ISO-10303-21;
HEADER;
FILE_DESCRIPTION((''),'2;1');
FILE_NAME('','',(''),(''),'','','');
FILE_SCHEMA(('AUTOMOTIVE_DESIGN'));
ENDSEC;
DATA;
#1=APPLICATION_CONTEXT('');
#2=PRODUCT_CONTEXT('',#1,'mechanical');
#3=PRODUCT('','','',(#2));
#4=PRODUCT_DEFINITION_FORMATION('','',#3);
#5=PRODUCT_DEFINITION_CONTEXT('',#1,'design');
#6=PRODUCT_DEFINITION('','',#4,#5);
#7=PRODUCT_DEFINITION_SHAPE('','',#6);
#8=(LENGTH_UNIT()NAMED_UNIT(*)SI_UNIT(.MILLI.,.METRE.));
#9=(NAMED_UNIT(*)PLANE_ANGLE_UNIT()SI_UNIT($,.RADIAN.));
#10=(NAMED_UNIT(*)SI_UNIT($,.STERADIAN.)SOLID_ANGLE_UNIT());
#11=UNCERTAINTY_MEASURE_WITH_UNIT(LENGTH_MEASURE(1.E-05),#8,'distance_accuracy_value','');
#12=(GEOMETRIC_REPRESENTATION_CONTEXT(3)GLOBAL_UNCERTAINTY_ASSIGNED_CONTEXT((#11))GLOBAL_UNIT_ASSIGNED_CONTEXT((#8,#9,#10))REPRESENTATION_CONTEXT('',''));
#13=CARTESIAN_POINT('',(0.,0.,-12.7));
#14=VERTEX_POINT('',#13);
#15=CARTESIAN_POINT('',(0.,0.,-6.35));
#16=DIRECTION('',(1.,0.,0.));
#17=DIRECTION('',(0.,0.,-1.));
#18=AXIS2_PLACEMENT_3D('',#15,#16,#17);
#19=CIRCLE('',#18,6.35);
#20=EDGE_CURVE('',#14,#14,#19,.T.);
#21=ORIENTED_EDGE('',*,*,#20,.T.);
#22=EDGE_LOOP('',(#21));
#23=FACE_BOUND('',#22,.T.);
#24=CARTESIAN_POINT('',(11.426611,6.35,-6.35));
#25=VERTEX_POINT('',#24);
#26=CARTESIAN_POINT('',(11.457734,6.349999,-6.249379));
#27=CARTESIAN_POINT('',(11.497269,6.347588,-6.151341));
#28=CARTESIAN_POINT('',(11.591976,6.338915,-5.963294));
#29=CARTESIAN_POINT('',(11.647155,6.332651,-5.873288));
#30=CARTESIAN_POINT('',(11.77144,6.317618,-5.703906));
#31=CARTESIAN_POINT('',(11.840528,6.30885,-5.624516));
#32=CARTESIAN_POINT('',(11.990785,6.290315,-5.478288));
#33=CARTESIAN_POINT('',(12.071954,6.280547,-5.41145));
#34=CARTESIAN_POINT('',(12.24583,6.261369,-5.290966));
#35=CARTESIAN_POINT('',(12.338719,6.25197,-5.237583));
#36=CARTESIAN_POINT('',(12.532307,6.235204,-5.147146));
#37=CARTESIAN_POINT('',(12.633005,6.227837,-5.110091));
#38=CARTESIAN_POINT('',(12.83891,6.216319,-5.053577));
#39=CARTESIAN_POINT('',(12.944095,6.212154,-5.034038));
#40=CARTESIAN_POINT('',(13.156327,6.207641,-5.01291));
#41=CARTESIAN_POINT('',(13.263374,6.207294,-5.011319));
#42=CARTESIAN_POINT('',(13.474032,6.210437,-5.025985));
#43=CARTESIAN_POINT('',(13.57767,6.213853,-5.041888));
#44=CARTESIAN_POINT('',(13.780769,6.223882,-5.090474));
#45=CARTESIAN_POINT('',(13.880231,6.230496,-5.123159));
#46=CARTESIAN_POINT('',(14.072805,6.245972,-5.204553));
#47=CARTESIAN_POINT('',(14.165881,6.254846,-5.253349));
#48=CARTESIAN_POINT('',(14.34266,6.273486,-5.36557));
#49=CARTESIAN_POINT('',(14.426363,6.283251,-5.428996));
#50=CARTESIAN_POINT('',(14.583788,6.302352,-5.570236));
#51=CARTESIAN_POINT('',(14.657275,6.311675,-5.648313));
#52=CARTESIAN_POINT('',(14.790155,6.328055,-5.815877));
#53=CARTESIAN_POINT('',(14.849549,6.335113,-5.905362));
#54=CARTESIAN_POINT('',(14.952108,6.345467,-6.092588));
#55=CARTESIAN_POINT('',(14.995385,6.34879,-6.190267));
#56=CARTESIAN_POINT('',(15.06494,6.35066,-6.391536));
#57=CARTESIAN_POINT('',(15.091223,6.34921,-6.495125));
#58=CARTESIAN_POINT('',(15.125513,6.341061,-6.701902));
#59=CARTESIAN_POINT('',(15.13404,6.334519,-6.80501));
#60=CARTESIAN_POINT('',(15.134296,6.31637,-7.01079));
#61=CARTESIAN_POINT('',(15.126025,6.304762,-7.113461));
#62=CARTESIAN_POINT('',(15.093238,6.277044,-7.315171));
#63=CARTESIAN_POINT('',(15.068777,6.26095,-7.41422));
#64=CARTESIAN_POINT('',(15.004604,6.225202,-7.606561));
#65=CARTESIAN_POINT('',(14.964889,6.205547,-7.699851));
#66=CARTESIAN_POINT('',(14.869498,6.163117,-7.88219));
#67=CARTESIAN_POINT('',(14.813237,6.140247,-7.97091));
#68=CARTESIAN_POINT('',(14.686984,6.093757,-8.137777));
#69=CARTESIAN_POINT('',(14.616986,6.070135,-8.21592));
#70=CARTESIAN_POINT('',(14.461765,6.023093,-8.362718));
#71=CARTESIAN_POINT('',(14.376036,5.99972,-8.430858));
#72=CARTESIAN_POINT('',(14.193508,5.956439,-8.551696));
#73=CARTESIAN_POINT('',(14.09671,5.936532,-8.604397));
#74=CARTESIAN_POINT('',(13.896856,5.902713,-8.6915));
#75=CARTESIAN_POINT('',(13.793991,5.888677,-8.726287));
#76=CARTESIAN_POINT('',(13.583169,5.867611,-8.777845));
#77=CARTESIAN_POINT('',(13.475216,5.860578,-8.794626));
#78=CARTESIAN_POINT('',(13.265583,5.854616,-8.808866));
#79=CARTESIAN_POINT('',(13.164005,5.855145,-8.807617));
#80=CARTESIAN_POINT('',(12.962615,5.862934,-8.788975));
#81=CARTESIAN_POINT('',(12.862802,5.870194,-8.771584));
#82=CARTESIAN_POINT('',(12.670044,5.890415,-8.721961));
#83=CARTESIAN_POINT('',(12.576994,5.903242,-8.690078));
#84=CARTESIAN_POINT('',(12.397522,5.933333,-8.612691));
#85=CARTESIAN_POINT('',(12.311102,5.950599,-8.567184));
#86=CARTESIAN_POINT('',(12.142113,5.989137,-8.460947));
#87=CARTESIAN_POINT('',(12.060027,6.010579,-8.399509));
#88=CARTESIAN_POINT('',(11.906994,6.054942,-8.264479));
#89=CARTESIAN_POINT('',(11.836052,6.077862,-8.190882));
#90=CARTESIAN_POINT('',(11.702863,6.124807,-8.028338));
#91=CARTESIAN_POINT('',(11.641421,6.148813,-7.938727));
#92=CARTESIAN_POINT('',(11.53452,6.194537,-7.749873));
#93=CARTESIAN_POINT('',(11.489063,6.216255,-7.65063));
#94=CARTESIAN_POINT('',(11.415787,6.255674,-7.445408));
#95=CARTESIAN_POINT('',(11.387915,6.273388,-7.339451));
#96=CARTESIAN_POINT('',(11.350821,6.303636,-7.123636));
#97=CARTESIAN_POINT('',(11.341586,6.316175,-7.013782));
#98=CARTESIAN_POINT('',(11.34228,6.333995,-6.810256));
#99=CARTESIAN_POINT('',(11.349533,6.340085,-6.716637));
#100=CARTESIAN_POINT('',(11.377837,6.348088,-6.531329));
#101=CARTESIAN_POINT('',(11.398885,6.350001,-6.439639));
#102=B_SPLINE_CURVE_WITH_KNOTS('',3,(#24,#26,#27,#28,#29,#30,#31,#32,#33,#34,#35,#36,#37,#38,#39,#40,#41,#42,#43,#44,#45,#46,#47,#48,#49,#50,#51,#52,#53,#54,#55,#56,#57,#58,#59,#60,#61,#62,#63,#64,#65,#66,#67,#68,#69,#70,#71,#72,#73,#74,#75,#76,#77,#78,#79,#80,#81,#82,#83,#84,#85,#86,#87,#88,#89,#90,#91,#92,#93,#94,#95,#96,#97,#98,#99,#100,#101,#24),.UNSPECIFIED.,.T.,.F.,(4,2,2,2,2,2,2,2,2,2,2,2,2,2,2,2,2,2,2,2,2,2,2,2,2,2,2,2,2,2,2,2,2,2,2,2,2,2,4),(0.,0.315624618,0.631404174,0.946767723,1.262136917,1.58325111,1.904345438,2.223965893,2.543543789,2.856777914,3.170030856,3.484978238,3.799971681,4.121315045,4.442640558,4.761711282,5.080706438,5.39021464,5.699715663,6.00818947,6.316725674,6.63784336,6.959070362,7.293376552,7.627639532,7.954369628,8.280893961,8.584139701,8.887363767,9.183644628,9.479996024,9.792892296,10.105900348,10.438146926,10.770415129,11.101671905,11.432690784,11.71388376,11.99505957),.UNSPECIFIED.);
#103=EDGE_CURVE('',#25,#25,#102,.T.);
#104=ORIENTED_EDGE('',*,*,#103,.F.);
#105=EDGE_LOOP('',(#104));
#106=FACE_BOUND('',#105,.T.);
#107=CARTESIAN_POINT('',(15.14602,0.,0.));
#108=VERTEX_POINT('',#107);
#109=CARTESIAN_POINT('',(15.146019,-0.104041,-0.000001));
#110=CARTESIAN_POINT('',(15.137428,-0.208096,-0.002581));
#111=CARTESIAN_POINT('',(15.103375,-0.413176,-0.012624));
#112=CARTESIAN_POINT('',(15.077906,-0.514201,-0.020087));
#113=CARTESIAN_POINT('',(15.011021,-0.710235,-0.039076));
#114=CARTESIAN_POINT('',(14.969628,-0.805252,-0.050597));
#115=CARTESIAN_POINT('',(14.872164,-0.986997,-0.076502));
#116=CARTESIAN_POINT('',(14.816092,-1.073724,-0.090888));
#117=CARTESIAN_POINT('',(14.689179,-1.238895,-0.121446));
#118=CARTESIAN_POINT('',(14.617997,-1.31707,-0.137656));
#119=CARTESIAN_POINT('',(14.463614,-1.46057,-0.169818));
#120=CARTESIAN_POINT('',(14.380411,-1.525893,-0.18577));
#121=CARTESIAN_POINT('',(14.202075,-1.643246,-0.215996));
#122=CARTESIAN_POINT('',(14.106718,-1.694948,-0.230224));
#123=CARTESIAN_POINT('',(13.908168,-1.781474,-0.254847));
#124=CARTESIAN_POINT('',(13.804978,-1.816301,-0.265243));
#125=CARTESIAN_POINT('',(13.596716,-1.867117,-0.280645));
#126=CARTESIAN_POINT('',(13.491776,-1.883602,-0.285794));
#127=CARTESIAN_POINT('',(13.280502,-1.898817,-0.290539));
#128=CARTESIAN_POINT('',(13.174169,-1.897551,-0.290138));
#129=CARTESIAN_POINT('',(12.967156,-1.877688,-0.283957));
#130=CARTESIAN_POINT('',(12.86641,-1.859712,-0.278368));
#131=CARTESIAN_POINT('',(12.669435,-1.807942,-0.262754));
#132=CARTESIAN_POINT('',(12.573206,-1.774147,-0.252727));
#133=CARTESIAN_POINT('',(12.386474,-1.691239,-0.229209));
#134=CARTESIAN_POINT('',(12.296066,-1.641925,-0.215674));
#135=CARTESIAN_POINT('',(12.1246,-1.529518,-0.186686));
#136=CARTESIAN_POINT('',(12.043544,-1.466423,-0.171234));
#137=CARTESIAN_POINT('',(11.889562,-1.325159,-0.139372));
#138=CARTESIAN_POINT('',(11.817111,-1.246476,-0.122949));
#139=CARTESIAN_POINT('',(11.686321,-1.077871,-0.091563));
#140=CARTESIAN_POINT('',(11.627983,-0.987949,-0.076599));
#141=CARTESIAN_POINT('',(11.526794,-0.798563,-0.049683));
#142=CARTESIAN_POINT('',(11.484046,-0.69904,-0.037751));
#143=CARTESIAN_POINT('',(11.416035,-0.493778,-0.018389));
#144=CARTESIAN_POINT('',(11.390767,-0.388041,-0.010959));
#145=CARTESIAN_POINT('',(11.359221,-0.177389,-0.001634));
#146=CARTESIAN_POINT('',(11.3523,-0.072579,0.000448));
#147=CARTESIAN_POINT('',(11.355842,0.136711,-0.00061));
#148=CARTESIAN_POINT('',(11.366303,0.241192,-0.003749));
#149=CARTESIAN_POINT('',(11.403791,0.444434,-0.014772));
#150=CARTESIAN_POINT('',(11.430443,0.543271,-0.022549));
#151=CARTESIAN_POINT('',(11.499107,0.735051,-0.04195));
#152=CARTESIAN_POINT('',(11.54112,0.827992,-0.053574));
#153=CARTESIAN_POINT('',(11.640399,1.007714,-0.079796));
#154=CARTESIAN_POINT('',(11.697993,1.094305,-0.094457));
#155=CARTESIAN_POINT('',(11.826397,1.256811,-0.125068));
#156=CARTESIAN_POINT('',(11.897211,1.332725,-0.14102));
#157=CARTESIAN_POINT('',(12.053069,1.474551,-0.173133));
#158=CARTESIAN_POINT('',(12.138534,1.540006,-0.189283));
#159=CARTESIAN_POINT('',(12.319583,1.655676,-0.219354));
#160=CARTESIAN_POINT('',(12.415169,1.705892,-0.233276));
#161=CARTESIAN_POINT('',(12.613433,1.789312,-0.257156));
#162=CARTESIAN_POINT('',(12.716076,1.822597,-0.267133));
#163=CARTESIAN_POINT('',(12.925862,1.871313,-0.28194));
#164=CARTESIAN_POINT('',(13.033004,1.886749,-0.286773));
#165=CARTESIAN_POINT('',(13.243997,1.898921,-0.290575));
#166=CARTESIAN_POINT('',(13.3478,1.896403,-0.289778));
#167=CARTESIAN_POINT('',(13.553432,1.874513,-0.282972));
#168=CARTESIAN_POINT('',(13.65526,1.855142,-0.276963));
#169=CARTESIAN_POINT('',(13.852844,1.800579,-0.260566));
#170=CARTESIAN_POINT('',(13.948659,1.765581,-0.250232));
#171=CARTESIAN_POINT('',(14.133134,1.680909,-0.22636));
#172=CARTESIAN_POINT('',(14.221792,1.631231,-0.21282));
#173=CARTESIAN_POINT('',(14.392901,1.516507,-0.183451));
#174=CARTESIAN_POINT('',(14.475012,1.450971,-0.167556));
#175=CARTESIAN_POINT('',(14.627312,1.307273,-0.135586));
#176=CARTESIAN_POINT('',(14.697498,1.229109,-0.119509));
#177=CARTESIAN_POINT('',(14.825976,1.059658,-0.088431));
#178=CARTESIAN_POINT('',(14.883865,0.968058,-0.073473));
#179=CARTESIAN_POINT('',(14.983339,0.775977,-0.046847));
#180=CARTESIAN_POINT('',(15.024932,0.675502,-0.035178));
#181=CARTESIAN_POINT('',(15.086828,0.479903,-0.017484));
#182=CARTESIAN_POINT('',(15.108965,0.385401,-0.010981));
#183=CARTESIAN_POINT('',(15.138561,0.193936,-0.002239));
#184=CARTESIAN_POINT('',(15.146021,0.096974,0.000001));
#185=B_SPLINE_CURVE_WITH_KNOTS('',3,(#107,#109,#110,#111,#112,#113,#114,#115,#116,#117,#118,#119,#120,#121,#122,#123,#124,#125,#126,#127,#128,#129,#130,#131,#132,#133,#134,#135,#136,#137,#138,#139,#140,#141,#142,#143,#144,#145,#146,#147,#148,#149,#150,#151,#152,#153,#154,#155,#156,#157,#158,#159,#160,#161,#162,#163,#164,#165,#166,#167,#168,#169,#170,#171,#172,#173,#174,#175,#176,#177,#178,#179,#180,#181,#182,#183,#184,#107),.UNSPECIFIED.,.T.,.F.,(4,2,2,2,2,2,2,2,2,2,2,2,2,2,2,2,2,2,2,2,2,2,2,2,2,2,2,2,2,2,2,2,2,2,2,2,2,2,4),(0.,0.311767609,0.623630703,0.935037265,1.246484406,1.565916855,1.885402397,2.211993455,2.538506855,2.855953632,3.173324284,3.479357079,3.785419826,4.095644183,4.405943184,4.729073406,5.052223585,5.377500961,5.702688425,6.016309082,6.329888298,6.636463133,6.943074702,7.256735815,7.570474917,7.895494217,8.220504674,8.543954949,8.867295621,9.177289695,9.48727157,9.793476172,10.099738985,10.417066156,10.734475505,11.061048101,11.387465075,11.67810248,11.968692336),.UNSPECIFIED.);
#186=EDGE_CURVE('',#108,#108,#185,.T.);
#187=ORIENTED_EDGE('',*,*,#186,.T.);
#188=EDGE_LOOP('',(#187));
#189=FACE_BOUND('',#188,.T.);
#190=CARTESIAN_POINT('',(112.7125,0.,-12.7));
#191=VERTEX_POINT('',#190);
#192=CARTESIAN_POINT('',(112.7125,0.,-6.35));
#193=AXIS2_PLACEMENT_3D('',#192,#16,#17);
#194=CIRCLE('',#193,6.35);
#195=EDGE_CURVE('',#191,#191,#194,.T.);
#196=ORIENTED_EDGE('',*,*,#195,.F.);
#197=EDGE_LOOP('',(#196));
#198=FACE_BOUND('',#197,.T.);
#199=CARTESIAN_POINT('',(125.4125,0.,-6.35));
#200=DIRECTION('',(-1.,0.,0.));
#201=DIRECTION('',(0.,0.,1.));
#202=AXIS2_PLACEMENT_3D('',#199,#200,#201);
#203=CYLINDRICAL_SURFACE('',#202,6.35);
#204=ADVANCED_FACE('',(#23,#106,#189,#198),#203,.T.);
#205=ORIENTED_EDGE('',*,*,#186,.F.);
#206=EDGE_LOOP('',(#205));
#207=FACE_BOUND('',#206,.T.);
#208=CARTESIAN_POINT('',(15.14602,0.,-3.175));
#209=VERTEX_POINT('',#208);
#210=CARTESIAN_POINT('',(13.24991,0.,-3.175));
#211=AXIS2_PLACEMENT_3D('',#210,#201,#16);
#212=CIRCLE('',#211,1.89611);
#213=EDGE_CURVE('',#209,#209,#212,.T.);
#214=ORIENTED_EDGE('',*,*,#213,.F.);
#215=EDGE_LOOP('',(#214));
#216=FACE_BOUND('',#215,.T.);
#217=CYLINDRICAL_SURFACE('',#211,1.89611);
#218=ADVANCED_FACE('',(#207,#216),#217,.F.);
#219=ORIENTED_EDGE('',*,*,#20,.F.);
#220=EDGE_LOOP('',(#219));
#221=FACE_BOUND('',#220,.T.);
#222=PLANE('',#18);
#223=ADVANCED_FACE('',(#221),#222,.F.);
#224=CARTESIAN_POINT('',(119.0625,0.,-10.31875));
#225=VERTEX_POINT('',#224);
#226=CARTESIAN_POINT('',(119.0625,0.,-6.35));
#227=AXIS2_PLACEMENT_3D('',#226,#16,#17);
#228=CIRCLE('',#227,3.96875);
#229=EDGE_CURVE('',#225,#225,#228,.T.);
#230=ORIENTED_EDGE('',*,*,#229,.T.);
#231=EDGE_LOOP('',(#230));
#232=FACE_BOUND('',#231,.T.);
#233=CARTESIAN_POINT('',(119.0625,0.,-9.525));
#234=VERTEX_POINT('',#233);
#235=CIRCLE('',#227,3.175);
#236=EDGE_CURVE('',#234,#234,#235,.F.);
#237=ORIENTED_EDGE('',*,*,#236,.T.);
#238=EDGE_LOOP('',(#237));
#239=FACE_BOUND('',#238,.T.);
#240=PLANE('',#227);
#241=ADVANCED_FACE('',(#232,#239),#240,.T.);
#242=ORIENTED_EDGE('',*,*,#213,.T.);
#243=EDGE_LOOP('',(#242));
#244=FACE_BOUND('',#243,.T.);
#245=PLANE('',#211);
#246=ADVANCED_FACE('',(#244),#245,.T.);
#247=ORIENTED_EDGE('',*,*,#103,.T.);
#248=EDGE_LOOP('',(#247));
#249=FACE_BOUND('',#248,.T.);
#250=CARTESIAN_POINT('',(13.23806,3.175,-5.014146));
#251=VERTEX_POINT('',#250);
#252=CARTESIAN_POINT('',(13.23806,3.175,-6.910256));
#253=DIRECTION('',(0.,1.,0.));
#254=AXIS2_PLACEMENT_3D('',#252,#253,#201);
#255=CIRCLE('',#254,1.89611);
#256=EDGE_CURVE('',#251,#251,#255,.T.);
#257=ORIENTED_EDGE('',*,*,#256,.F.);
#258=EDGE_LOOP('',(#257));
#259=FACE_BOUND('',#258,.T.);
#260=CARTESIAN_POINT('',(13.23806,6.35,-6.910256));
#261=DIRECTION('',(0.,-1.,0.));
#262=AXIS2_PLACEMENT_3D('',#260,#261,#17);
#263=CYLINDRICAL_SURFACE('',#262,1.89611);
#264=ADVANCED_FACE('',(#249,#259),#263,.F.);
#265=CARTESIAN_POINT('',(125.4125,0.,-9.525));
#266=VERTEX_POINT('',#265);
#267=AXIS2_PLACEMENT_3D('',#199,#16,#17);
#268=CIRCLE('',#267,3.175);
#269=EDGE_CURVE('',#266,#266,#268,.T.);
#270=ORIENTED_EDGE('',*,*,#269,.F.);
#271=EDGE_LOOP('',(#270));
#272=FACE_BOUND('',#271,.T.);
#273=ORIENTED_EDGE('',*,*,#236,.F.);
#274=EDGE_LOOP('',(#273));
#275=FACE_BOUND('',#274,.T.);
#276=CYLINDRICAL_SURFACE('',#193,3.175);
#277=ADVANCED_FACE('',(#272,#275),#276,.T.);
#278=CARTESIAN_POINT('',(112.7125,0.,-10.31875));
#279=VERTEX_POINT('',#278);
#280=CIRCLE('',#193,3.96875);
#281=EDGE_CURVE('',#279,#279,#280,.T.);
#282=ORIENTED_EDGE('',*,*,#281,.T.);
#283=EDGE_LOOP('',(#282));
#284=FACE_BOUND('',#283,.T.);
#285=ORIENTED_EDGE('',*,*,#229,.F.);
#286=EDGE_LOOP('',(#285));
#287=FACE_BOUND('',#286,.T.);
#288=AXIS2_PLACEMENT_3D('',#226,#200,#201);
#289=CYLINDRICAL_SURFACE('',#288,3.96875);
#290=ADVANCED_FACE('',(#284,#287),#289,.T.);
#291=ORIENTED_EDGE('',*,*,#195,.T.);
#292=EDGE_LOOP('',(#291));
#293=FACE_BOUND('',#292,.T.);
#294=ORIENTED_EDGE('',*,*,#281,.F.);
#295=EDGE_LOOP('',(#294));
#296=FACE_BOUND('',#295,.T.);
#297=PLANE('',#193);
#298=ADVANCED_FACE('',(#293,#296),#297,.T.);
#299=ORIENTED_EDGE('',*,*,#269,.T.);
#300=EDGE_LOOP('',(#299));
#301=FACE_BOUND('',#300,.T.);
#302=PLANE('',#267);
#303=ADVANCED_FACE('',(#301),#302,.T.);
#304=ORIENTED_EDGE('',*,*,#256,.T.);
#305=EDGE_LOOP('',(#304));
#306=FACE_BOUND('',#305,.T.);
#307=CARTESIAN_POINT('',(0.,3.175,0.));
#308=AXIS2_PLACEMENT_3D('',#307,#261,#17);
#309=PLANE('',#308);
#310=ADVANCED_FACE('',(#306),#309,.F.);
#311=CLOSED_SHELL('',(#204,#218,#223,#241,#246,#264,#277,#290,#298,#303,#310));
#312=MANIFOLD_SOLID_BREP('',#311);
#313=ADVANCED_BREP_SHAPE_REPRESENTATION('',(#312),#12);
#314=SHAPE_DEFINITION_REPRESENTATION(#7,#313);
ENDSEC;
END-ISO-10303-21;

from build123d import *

# Parameters (mm, degrees)
SKETCH1_R              = 6.35
BOSS_EXTRUDE1_DEPTH    = 125.4125
SKETCH2_R              = 1.89611
CUT_EXTRUDE1_DEPTH     = 3.175
CUT_EXTRUDE2_START     = 3.175
CUT_EXTRUDE2_OUTLINE_R = 1.89611
CUT_EXTRUDE2_DEPTH     = 3.1750001
SKETCH3_OUTSIDE_W      = 40.038
SKETCH3_OUTSIDE_H      = 40.038
SKETCH3_OUTSIDE_R      = 3.175
CUT_EXTRUDE3_DEPTH     = 12.7
SKETCH4_R              = 3.96875
BOSS_EXTRUDE2_DEPTH    = 6.35


# Read off the part's stored shape, not the designer's step: Cut-Extrude2
with BuildPart() as part:
    # Sketch1 → Boss-Extrude1 (new body)
    with BuildSketch(Plane(origin=(0, 0, 0), x_dir=(0, 0, -1), z_dir=(1, 0, 0))):
        with Locations((6.35, 0)):
            Circle(SKETCH1_R)
    extrude(amount=BOSS_EXTRUDE1_DEPTH)

    # Sketch2 → Cut-Extrude1 (cut)
    with BuildSketch(Plane.XY):
        with Locations((13.24991, 0)):
            Circle(SKETCH2_R)
    extrude(amount=-CUT_EXTRUDE1_DEPTH, mode=Mode.SUBTRACT)

    # Cut-Extrude2 outline → Cut-Extrude2 (cut)
    with BuildSketch(Plane(origin=(0, 0, 0), x_dir=(1, 0, 0), z_dir=(0, 1, 0)).offset(CUT_EXTRUDE2_START)):
        with Locations((13.23805984, 6.910255895)):
            Circle(CUT_EXTRUDE2_OUTLINE_R)
    extrude(amount=CUT_EXTRUDE2_DEPTH, mode=Mode.SUBTRACT)

    # Sketch3 outside → Cut-Extrude3 (cut)
    with BuildSketch(Plane(origin=(125.4125, 0, 0), x_dir=(0, 0, -1), z_dir=(1, 0, 0))):
        with Locations((6.35, 0)):
            Rectangle(SKETCH3_OUTSIDE_W, SKETCH3_OUTSIDE_H)
        with Locations((6.35, 0)):
            Circle(SKETCH3_OUTSIDE_R, mode=Mode.SUBTRACT)
    extrude(amount=-CUT_EXTRUDE3_DEPTH, mode=Mode.SUBTRACT)

    # Sketch4 → Boss-Extrude2 (add)
    with BuildSketch(Plane(origin=(112.7125, 0, 0), x_dir=(0, 0, -1), z_dir=(1, 0, 0))):
        with Locations((6.35, 0)):
            Circle(SKETCH4_R)
    extrude(amount=BOSS_EXTRUDE2_DEPTH)


solid = part.part
